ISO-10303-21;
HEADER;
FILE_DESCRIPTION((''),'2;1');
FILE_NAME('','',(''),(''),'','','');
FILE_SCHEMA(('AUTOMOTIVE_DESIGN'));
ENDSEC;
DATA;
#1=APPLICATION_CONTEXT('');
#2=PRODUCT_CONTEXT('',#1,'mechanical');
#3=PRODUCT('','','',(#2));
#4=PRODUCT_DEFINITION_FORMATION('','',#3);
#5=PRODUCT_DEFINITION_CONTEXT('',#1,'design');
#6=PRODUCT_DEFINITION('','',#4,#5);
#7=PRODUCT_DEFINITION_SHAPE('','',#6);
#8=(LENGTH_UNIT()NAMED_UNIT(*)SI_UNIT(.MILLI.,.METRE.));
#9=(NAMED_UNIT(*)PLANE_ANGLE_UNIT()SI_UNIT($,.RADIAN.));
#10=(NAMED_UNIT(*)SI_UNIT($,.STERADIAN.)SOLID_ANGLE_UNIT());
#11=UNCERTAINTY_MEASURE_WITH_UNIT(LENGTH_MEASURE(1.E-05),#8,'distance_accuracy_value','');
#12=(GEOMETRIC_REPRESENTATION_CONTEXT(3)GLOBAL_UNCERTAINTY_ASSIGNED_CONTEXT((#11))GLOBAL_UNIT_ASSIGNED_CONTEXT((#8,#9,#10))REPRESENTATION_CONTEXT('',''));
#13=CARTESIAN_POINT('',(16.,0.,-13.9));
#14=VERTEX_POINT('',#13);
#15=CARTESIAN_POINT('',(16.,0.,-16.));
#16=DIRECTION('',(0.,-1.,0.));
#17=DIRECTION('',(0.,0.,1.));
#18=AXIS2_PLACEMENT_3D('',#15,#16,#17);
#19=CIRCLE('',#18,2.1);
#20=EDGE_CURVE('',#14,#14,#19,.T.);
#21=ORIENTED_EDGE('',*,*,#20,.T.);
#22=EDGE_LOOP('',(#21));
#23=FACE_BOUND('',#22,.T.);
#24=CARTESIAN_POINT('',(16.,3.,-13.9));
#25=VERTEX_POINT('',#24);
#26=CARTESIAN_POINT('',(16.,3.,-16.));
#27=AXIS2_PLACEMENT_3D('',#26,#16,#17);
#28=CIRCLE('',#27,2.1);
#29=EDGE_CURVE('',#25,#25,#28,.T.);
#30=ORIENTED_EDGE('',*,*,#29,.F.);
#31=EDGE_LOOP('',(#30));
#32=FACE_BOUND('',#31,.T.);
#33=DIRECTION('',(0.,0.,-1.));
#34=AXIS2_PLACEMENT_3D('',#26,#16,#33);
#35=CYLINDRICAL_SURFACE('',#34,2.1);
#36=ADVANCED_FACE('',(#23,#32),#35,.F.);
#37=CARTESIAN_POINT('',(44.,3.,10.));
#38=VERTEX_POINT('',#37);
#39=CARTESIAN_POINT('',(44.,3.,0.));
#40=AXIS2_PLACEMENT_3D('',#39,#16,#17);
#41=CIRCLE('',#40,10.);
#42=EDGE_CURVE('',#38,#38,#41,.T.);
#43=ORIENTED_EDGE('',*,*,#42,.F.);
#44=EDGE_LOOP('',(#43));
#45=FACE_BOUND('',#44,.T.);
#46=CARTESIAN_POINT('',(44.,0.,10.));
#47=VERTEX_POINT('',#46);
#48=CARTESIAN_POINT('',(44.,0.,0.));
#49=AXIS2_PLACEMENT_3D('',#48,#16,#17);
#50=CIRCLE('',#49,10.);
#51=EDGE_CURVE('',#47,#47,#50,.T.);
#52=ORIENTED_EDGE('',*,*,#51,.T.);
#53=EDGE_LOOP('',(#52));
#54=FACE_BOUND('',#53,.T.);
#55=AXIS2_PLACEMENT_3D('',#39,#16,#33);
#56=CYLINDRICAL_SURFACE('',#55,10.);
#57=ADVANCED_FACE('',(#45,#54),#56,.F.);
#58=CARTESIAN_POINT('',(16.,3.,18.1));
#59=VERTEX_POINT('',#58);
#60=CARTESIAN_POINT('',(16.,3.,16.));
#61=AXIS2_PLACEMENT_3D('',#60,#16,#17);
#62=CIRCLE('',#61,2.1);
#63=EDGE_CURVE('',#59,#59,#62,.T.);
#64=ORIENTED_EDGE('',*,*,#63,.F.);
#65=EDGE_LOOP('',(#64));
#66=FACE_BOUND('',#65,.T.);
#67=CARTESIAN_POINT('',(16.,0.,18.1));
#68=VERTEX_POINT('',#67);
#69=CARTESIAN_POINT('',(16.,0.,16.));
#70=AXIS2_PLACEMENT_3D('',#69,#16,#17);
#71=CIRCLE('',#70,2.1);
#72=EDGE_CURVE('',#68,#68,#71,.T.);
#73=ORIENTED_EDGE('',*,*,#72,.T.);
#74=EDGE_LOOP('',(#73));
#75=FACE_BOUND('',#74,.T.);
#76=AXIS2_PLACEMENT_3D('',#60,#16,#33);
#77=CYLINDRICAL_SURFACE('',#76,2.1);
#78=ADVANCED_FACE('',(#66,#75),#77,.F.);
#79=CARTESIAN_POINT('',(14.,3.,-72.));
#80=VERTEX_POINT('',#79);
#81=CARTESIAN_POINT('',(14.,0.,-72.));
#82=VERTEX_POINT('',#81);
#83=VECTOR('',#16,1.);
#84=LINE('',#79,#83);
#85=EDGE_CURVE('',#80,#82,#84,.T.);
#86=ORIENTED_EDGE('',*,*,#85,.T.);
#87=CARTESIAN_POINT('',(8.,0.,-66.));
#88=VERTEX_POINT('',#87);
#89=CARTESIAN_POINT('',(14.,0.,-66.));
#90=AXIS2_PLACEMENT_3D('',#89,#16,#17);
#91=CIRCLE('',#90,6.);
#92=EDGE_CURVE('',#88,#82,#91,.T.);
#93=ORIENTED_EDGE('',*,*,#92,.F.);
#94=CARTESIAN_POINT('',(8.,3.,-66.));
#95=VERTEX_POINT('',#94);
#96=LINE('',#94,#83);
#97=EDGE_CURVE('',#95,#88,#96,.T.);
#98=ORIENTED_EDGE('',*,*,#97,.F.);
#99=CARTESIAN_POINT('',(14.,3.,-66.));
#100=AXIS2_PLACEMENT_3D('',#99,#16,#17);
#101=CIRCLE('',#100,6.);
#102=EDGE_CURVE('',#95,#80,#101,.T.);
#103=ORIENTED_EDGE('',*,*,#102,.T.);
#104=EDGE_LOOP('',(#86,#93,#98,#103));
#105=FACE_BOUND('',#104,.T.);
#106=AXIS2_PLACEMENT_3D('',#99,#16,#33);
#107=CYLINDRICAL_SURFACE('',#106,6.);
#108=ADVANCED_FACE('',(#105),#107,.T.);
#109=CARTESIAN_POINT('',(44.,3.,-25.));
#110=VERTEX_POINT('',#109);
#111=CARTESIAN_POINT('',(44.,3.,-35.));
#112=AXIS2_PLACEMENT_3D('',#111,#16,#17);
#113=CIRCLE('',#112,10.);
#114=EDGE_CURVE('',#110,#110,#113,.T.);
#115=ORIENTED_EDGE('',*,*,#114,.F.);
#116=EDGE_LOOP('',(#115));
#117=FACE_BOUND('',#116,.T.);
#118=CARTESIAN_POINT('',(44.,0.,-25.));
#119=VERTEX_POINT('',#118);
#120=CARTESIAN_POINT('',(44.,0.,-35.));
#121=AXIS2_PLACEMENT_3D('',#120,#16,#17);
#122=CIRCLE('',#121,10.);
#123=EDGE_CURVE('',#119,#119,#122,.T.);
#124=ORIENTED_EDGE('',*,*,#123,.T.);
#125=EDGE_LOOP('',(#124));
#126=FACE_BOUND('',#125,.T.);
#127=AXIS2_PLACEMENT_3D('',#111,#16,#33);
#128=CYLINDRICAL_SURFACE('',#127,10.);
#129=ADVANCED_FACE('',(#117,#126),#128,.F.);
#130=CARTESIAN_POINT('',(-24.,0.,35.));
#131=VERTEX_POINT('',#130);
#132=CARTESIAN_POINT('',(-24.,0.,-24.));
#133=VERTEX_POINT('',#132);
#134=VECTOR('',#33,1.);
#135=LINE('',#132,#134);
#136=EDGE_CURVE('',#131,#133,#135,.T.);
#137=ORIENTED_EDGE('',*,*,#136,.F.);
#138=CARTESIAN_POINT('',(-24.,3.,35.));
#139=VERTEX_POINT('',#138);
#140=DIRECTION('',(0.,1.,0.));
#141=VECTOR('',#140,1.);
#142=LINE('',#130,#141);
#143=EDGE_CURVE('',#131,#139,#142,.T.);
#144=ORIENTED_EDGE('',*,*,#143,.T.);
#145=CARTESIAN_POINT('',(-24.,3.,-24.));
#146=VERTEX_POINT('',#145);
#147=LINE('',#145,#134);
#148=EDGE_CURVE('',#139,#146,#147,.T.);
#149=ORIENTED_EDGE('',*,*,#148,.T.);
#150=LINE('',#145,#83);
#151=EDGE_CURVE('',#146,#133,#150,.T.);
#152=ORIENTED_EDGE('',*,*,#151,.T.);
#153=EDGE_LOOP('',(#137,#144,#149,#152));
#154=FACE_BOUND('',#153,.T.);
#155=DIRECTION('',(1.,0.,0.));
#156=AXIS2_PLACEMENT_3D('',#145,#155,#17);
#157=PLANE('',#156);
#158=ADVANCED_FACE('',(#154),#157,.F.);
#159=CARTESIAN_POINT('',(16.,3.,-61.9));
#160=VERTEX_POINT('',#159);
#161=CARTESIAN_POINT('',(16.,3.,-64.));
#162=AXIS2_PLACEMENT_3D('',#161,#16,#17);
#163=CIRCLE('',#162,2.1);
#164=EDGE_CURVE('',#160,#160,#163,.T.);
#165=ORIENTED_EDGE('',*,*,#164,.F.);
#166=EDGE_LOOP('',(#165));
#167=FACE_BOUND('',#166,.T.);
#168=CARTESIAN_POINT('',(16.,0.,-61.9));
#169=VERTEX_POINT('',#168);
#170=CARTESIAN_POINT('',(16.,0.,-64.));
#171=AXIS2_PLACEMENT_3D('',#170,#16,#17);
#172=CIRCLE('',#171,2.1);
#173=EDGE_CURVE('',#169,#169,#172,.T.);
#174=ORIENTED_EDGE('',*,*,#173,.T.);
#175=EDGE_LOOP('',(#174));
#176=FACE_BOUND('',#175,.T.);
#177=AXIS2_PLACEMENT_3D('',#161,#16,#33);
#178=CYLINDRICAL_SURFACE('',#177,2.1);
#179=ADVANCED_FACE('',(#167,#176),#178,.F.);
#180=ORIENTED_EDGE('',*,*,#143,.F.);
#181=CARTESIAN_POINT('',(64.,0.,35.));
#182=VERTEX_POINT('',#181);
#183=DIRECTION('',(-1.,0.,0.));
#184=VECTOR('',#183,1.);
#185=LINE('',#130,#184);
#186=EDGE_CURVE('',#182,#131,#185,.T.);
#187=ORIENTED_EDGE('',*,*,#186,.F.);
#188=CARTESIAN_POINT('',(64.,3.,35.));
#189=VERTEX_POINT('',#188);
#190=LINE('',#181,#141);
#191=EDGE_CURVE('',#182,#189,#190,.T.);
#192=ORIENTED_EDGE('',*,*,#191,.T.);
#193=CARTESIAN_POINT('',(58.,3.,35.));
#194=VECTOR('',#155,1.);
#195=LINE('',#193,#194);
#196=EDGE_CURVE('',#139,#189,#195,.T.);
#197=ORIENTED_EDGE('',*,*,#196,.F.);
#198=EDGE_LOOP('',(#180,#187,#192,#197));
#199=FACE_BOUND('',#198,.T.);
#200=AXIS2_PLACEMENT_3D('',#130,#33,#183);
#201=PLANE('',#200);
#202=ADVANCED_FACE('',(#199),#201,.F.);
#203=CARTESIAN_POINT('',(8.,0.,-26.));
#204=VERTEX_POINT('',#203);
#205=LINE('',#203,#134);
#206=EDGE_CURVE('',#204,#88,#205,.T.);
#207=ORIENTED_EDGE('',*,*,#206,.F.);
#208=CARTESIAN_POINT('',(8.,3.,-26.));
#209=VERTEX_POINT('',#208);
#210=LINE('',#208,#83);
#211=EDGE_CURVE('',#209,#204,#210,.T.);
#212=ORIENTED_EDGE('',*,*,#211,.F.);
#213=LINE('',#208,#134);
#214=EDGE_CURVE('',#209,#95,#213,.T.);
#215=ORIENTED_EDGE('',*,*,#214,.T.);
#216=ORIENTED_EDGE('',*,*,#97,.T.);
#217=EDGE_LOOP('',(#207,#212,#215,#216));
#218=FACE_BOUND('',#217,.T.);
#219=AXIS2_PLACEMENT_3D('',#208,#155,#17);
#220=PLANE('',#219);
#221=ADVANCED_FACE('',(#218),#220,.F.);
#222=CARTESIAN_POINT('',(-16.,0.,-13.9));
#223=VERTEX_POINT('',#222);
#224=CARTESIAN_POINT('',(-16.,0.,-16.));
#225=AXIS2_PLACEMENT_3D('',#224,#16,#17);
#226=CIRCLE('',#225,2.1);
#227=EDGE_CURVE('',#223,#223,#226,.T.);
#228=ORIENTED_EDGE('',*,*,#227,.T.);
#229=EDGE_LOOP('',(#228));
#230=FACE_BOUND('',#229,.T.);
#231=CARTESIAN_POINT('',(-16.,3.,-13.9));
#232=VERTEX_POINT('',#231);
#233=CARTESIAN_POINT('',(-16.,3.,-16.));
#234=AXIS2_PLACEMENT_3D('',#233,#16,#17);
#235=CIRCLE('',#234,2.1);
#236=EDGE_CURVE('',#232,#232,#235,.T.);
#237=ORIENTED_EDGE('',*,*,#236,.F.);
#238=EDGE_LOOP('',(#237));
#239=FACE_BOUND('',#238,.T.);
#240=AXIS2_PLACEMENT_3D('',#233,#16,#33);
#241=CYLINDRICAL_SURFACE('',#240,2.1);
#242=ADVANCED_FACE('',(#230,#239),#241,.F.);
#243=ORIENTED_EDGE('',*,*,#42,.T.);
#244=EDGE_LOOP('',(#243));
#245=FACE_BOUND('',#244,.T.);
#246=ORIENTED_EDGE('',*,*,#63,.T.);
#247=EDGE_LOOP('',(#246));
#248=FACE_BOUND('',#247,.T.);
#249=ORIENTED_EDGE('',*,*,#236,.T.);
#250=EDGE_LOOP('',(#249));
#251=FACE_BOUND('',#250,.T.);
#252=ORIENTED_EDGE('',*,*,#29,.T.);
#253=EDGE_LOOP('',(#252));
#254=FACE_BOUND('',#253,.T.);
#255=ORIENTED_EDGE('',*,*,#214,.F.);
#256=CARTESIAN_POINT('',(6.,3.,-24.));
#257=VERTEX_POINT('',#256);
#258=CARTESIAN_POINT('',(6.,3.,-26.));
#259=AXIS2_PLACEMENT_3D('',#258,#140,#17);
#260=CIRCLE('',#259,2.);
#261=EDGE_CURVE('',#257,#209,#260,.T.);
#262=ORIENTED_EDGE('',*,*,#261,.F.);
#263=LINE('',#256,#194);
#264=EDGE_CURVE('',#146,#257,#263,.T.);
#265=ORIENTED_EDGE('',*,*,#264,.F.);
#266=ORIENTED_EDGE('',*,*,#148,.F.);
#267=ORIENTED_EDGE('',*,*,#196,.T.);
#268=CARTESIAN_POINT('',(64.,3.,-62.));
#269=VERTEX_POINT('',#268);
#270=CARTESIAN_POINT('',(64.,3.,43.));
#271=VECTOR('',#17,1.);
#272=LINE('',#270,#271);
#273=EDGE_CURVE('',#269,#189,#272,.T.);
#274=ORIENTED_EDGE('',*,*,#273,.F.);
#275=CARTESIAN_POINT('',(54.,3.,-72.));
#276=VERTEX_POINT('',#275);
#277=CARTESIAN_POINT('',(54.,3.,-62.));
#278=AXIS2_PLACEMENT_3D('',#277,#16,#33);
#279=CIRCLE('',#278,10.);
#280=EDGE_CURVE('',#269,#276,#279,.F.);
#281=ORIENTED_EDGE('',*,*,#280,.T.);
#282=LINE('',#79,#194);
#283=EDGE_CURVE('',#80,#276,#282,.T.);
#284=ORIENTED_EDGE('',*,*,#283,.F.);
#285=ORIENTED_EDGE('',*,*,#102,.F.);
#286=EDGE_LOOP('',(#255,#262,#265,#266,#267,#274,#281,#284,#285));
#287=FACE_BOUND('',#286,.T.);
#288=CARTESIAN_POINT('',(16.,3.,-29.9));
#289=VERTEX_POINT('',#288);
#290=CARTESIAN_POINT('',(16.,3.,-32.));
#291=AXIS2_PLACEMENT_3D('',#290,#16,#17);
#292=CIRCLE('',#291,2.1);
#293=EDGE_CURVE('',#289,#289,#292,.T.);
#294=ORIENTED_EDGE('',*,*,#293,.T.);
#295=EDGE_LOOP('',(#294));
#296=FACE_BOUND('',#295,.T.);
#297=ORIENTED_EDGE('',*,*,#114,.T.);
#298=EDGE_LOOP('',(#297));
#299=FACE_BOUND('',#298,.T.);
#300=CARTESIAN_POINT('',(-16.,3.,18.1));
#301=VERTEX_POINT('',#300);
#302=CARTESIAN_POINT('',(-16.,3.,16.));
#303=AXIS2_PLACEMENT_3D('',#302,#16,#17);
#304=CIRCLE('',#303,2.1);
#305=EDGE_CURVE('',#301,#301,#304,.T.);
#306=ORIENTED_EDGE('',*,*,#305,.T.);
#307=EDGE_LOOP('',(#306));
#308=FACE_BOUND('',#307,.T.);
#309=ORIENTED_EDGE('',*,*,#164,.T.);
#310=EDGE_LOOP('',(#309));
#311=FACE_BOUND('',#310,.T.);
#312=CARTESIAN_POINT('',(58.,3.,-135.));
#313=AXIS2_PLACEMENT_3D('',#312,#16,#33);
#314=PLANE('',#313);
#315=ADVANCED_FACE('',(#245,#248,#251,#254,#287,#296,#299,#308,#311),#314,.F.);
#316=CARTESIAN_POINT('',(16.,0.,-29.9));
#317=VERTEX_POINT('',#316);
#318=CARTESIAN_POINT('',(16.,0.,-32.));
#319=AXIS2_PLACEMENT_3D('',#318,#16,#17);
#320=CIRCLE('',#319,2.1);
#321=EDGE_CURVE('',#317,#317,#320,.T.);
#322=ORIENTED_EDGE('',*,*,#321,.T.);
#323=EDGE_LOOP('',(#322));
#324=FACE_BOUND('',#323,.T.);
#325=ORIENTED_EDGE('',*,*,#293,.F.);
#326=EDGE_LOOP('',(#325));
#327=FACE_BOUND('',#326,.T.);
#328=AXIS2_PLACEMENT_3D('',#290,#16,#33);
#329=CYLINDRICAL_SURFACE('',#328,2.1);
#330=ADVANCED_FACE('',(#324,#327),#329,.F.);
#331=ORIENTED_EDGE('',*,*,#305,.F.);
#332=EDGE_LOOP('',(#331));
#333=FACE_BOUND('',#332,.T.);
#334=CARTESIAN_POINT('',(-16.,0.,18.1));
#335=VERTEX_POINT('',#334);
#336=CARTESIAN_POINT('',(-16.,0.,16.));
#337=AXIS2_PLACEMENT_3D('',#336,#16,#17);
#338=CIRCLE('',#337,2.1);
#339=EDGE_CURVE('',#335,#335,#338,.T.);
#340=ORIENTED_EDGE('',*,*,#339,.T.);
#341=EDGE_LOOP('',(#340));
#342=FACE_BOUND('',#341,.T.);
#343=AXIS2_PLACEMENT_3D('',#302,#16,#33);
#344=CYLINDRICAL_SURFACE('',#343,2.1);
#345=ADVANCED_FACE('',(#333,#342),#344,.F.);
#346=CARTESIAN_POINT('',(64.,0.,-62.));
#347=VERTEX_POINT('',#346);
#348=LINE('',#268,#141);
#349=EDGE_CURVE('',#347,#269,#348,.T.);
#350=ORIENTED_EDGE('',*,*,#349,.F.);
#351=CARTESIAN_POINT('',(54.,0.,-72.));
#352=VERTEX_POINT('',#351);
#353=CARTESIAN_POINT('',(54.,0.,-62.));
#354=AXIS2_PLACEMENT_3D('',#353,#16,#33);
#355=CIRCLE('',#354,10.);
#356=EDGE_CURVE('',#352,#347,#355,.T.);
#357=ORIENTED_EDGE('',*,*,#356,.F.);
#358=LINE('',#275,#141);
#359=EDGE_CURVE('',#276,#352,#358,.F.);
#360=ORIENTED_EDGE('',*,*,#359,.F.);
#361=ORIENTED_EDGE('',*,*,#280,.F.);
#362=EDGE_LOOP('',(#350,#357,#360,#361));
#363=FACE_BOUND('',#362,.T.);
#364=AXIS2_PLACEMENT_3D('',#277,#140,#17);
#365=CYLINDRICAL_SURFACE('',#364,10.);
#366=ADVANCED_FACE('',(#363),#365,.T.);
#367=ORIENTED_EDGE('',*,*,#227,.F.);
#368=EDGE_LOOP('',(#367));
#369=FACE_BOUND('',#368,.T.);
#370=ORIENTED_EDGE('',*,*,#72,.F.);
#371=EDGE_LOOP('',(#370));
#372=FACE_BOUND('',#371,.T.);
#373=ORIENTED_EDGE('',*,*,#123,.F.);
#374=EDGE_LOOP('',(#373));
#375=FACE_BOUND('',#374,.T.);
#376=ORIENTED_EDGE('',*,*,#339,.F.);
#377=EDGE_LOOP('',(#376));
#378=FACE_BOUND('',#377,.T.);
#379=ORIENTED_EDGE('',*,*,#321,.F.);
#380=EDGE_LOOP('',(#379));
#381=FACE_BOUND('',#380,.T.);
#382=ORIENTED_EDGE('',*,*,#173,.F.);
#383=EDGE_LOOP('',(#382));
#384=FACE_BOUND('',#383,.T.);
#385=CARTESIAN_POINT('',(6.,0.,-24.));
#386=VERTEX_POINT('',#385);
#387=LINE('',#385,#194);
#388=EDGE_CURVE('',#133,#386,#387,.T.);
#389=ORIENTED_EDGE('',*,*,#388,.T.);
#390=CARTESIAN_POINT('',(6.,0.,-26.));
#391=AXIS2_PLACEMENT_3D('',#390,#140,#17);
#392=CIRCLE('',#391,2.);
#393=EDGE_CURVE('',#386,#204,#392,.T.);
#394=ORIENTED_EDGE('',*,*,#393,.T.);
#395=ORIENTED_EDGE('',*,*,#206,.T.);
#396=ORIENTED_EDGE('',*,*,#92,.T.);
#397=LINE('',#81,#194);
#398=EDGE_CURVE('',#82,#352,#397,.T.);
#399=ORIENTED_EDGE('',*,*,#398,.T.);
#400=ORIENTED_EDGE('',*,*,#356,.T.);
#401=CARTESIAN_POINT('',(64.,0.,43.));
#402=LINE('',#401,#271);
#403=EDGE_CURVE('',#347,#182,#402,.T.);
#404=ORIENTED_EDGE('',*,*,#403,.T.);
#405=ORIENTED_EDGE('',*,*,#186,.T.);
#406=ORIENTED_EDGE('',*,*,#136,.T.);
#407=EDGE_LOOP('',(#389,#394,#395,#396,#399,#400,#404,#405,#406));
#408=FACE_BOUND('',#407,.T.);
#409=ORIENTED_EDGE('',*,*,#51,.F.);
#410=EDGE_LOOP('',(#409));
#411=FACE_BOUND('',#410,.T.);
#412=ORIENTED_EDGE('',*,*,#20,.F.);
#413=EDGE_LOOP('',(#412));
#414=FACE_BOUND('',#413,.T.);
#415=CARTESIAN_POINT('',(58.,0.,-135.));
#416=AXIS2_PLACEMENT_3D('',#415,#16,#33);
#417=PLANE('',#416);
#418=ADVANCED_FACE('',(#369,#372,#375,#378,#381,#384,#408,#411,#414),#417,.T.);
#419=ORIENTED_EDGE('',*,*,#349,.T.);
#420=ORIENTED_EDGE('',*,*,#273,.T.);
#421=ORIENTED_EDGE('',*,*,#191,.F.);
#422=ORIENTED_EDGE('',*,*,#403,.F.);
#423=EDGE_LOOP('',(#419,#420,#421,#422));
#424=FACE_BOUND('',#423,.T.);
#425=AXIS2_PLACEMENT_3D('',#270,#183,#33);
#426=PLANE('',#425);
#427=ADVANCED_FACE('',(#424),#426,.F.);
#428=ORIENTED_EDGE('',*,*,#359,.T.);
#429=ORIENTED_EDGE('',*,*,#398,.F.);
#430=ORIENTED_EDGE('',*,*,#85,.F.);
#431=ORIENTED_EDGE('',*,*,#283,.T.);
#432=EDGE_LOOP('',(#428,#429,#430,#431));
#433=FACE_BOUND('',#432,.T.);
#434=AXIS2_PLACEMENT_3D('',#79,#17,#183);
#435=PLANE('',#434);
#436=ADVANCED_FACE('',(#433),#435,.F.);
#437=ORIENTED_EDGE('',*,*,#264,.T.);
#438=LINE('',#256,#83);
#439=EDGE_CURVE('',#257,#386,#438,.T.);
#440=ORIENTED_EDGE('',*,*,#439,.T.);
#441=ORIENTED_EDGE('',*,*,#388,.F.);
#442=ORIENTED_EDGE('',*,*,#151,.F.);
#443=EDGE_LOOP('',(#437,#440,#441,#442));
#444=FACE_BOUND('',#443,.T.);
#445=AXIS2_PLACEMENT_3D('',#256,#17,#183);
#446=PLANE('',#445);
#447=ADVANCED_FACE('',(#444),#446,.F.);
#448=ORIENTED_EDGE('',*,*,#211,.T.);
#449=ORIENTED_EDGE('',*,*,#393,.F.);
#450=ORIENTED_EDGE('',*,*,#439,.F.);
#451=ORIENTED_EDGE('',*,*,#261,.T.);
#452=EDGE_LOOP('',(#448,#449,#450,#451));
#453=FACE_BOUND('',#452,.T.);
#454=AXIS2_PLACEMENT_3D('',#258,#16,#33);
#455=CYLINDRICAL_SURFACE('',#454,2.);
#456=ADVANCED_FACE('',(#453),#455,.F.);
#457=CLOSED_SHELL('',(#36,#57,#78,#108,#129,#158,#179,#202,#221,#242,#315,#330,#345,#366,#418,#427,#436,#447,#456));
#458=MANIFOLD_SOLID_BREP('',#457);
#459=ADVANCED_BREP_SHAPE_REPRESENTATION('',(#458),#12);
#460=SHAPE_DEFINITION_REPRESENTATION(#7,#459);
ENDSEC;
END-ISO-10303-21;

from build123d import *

# Parameters (mm, degrees)
BACKPLATELEFT_MIRRORED_OUTLINE_R   = 2.1
BACKPLATELEFT_MIRRORED_OUTLINE_R_2 = 10
BACKPLATELEFT_MIRRORED_DEPTH       = 3
SKETCH2_W                          = 40
SKETCH2_H                          = 103.465043027
CUT_EXTRUDE1_DEPTH                 = 10
SKETCH3_W                          = 25.884261779
SKETCH3_H                          = 20.988460011
BOSS_EXTRUDE1_DEPTH                = 3
FILLET1_R                          = 10
CUT_EXTRUDE2_DEPTH                 = 97.379458392
CUT_EXTRUDE2_DEPTH_BACK            = 97.379458392
SKETCH4_W                          = 88
SKETCH4_H                          = 4


# Read off the part's stored shape, not the designer's step: backPlateLeft_Mirrored
with BuildPart() as part:
    # backPlateLeft_Mirrored outline → backPlateLeft_Mirrored (new body)
    with BuildSketch(Plane(origin=(0, 0, 0), x_dir=(1, 0, 0), z_dir=(0, 1, 0))):
        with BuildLine():
            Line((-24, 24), (-24, -39))
            Line((-24, -39), (64, -39))
            Line((64, -39), (64, 135))
            ThreePointArc((64, 135), (62.242640687, 139.242640687), (58, 141))
            Line((58, 141), (30, 141))
            ThreePointArc((30, 141), (25.757359313, 139.242640687), (24, 135))
            Line((24, 135), (24, 72))
            Line((24, 72), (14, 72))
            ThreePointArc((14, 72), (9.757359313, 70.242640687), (8, 66))
            Line((8, 66), (8, 26))
            ThreePointArc((8, 26), (7.414213562, 24.585786438), (6, 24))
            Line((6, 24), (-24, 24))
        make_face()
        with Locations((-16, -16)):
            Circle(BACKPLATELEFT_MIRRORED_OUTLINE_R, mode=Mode.SUBTRACT)
        with Locations((16, -16)):
            Circle(BACKPLATELEFT_MIRRORED_OUTLINE_R, mode=Mode.SUBTRACT)
        with Locations((-16, 16)):
            Circle(BACKPLATELEFT_MIRRORED_OUTLINE_R, mode=Mode.SUBTRACT)
        with Locations((16, 16)):
            Circle(BACKPLATELEFT_MIRRORED_OUTLINE_R, mode=Mode.SUBTRACT)
        with Locations((16, 32)):
            Circle(BACKPLATELEFT_MIRRORED_OUTLINE_R, mode=Mode.SUBTRACT)
        with Locations((44, 0)):
            Circle(BACKPLATELEFT_MIRRORED_OUTLINE_R_2, mode=Mode.SUBTRACT)
        with Locations((44, 35)):
            Circle(BACKPLATELEFT_MIRRORED_OUTLINE_R_2, mode=Mode.SUBTRACT)
        with Locations((16, 64)):
            Circle(BACKPLATELEFT_MIRRORED_OUTLINE_R, mode=Mode.SUBTRACT)
        with Locations((44, 70)):
            Circle(BACKPLATELEFT_MIRRORED_OUTLINE_R_2, mode=Mode.SUBTRACT)
        with Locations((44, 105)):
            Circle(BACKPLATELEFT_MIRRORED_OUTLINE_R_2, mode=Mode.SUBTRACT)
    extrude(amount=BACKPLATELEFT_MIRRORED_DEPTH)

    # Sketch2 → Cut-Extrude1 (cut)
    with BuildSketch(Plane(origin=(0, 3, 0), x_dir=(1, 0, 0), z_dir=(0, 1, 0))):
        with Locations((44, 123.732521514)):
            Rectangle(SKETCH2_W, SKETCH2_H)
    extrude(amount=-CUT_EXTRUDE1_DEPTH, mode=Mode.SUBTRACT)

    # Sketch3 → Boss-Extrude1 (add)
    with BuildSketch(Plane(origin=(0, 3, 0), x_dir=(1, 0, 0), z_dir=(0, 1, 0))):
        with Locations((44.305953134, 61.505769994)):
            Rectangle(SKETCH3_W, SKETCH3_H)
    extrude(amount=-BOSS_EXTRUDE1_DEPTH)

    # Fillet1
    fillet1_edges = [part.edges().sort_by_distance(p)[0] for p in [
        (64, 1.5, -72),
    ]]
    fillet(fillet1_edges, radius=FILLET1_R)

    # Sketch4 → Cut-Extrude2 (cut, two sides: drawn at the far end of the back side and taken through both)
    with BuildSketch(Plane(origin=(0, 3, 0), x_dir=(1, 0, 0), z_dir=(0, 1, 0)).offset(-CUT_EXTRUDE2_DEPTH_BACK)):
        with Locations((20, -37)):
            Rectangle(SKETCH4_W, SKETCH4_H)
    extrude(amount=CUT_EXTRUDE2_DEPTH + CUT_EXTRUDE2_DEPTH_BACK, mode=Mode.SUBTRACT)


solid = part.part
